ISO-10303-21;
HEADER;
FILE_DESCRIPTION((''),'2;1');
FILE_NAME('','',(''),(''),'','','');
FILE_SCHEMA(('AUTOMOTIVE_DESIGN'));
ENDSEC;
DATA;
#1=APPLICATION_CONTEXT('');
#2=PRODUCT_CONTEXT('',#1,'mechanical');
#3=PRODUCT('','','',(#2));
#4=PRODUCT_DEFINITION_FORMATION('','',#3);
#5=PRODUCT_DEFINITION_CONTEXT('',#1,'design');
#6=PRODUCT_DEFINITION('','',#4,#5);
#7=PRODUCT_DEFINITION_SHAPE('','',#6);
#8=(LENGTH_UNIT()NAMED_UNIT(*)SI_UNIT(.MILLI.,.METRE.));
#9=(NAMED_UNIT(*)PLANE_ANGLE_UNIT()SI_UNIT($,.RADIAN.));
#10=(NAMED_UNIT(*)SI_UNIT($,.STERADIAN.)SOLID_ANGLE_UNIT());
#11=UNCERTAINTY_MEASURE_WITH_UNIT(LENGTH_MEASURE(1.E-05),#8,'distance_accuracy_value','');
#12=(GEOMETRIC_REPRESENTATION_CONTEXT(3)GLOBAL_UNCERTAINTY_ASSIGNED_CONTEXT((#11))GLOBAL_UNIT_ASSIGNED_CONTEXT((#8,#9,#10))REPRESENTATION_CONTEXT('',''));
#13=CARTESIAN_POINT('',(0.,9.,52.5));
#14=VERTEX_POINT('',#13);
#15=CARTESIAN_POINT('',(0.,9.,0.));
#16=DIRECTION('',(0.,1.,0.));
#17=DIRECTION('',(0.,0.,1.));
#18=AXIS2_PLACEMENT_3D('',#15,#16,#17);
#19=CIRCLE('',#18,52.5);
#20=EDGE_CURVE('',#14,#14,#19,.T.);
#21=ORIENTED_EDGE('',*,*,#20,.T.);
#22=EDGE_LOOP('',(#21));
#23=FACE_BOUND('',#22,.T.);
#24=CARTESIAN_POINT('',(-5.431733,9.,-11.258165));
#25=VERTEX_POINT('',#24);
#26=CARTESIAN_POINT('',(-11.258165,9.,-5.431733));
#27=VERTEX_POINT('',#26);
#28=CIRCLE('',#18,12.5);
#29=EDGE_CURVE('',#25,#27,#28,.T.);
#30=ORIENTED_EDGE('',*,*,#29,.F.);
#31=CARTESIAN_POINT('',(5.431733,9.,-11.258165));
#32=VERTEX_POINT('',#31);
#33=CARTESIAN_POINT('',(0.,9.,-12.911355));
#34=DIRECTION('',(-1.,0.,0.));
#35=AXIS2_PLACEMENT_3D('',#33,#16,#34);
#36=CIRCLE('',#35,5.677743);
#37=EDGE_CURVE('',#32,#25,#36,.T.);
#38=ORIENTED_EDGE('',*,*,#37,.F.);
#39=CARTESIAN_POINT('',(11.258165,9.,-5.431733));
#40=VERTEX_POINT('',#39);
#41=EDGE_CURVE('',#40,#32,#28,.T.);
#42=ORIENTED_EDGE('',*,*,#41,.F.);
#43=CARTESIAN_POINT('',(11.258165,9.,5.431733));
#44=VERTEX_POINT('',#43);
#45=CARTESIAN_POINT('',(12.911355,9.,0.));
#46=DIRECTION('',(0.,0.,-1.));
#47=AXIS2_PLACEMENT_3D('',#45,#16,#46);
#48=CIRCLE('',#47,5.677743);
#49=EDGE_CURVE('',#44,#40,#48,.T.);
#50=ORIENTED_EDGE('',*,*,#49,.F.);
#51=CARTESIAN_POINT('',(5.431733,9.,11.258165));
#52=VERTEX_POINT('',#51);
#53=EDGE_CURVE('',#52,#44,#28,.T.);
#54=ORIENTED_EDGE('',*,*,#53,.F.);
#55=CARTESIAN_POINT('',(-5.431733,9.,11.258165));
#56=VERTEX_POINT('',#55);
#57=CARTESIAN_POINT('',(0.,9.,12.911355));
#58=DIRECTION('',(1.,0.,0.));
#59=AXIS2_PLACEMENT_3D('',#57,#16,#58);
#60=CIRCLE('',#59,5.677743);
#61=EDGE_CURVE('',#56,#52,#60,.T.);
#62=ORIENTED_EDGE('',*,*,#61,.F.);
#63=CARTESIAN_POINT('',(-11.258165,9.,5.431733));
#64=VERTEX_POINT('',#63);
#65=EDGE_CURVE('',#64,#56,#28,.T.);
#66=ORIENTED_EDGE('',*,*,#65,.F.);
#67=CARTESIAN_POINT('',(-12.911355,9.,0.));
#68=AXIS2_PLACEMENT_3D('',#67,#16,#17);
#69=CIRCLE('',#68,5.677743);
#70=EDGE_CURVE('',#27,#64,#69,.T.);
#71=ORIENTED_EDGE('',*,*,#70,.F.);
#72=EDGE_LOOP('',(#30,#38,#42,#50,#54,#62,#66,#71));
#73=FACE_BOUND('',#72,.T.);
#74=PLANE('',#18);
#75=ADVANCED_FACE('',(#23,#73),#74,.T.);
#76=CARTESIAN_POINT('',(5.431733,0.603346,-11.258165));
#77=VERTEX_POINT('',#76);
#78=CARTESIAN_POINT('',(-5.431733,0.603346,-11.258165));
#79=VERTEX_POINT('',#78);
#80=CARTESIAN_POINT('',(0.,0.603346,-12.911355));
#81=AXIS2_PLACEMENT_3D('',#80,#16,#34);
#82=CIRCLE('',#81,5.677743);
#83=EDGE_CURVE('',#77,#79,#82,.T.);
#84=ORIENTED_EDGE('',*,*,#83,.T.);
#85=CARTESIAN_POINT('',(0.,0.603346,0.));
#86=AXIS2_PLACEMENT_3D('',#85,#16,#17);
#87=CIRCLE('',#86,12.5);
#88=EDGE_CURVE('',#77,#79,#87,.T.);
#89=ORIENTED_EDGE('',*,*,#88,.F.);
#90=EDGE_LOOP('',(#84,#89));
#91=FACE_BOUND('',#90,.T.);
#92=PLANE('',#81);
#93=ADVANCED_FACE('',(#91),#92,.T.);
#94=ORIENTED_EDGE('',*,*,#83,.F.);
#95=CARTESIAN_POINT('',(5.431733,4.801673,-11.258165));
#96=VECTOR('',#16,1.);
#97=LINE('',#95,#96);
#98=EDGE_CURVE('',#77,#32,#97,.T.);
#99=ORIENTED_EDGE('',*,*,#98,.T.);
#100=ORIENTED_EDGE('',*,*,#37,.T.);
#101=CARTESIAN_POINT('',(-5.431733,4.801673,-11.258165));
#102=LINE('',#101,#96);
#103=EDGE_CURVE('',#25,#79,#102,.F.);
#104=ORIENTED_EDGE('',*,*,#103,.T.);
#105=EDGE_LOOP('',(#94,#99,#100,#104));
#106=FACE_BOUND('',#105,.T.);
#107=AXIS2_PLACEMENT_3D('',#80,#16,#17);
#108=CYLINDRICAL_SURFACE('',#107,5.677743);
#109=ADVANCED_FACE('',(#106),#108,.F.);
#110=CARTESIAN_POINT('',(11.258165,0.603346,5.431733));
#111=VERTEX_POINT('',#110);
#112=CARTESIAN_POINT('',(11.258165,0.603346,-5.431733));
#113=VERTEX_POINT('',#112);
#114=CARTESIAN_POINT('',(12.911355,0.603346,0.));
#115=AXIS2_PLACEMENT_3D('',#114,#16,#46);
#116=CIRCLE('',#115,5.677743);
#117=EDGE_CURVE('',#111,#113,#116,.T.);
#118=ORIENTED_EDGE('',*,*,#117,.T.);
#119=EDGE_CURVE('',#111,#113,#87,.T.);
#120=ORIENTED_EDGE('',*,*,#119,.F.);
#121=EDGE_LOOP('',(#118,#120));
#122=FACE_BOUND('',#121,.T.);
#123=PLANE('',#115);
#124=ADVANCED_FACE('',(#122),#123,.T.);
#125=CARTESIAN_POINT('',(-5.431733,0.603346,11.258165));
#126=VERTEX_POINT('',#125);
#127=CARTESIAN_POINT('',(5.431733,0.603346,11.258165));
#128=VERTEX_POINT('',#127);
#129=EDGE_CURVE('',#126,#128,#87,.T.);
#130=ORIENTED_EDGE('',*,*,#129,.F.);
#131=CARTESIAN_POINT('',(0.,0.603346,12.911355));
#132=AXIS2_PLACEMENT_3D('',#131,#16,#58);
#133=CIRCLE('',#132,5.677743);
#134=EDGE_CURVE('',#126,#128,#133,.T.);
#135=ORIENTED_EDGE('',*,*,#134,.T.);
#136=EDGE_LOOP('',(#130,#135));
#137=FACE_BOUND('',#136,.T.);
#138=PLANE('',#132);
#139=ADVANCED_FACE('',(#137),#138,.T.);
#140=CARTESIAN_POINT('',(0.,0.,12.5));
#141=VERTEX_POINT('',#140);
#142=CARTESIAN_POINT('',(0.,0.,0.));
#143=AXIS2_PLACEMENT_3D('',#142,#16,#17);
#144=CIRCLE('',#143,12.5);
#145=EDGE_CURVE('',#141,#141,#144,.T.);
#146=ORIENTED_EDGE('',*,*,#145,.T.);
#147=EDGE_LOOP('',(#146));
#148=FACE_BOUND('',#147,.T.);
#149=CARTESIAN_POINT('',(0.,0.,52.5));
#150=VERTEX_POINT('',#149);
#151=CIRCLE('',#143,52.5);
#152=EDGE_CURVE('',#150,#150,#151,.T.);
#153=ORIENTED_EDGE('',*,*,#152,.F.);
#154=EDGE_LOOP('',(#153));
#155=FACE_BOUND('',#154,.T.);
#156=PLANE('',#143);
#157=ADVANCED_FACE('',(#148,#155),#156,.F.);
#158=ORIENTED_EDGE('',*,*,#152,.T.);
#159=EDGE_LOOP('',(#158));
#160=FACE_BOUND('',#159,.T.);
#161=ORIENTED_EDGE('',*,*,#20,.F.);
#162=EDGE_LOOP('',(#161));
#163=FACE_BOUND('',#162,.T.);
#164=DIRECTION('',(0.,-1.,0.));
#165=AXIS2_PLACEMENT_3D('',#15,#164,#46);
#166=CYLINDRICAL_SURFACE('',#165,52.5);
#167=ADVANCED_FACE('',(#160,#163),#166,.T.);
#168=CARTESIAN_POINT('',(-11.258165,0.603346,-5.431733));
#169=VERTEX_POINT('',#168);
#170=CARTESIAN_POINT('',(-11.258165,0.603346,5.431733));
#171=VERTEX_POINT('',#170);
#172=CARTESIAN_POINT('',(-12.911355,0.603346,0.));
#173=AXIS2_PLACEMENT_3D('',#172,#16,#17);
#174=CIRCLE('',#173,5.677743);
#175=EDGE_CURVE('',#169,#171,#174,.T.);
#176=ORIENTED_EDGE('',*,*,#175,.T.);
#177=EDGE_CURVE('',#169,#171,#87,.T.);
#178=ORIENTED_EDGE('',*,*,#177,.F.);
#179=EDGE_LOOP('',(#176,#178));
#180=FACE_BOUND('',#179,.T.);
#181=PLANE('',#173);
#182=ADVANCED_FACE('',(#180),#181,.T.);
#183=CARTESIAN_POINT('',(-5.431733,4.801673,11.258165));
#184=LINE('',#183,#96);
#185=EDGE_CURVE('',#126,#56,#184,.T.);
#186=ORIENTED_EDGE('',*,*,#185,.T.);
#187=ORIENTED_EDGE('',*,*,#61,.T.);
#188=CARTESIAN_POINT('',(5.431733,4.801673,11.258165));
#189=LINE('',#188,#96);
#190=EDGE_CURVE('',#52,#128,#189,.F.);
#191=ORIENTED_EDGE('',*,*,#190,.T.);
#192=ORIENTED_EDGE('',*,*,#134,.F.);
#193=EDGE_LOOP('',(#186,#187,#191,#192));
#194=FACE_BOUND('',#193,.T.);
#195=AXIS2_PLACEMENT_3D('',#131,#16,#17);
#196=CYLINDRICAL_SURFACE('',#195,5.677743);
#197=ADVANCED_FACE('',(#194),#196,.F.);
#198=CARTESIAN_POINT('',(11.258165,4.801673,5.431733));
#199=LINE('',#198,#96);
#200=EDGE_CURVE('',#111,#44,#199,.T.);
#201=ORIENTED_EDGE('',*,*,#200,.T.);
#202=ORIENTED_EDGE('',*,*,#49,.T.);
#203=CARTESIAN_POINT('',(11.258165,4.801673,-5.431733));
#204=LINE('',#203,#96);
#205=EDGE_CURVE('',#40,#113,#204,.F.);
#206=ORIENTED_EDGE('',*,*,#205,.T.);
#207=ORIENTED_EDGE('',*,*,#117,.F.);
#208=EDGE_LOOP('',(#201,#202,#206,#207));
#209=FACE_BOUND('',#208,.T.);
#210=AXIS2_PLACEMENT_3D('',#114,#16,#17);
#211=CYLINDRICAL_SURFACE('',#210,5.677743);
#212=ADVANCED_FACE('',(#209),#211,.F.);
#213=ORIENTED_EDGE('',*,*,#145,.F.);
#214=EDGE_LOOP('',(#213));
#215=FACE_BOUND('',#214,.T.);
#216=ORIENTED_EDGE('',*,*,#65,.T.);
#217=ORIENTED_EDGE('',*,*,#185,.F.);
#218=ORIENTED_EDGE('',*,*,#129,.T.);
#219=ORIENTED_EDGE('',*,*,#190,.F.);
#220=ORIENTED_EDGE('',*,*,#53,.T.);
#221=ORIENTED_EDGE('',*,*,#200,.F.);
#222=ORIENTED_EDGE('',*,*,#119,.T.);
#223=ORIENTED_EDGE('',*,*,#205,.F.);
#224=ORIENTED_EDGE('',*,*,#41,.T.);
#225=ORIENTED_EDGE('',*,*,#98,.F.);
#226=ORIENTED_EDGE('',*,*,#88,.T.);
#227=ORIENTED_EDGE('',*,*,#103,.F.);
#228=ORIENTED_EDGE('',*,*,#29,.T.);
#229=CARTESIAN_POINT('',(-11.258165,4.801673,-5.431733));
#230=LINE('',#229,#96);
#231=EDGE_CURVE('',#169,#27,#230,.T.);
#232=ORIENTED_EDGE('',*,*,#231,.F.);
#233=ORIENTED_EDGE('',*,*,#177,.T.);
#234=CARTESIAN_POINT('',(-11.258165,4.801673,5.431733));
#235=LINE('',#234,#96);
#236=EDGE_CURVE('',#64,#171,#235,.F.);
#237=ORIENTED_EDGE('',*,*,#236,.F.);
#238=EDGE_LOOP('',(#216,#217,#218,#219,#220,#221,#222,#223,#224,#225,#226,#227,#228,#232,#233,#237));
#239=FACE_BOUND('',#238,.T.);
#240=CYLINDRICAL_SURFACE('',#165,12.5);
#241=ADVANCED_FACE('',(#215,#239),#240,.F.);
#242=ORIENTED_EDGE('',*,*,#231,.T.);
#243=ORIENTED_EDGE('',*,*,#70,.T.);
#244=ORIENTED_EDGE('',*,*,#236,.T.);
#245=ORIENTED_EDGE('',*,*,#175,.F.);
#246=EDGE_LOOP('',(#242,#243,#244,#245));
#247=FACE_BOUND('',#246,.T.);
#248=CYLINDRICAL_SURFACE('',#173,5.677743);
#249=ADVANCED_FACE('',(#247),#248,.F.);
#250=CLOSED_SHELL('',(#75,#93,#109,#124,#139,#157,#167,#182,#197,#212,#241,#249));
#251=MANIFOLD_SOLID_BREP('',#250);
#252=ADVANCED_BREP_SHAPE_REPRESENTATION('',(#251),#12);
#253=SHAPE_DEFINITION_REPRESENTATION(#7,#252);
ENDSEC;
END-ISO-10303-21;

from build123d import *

# Parameters (mm, degrees)
SKETCH1_R           = 52.5
BOSS_EXTRUDE1_DEPTH = 9
SKETCH2_R           = 12.5
CUT_EXTRUDE1_DEPTH  = 75.789705174
SKETCH3_R           = 5.677743223
CUT_EXTRUDE2_DEPTH  = 8.396653789
CIRPATTERN1_COUNT   = 4


with BuildPart() as part:
    # Sketch1 → Boss-Extrude1 (new body)
    with BuildSketch(Plane(origin=(0, 0, 0), x_dir=(1, 0, 0), z_dir=(0, 1, 0))):
        Circle(SKETCH1_R)
    extrude(amount=BOSS_EXTRUDE1_DEPTH)

    # Sketch2 → Cut-Extrude1 (cut, through all)
    with BuildSketch(Plane(origin=(0, 0, 0), x_dir=(1, 0, 0), z_dir=(0, 1, 0))):
        Circle(SKETCH2_R)
    extrude(amount=CUT_EXTRUDE1_DEPTH, mode=Mode.SUBTRACT)

    # Sketch3 → Cut-Extrude2 (cut)
    with BuildSketch(Plane(origin=(0, 9, 0), x_dir=(1, 0, 0), z_dir=(0, 1, 0))):
        with Locations((-12.911355312, 0)):
            Circle(SKETCH3_R)
    cut_extrude2 = extrude(amount=-CUT_EXTRUDE2_DEPTH, mode=Mode.SUBTRACT)

    # CirPattern1: Cut-Extrude2 ×4 about axis
    cirpattern1_axis = Axis((0, 0, 0), (0, 1, 0))
    for i in range(1, CIRPATTERN1_COUNT):
        add(cut_extrude2.rotate(cirpattern1_axis, i * 360 / CIRPATTERN1_COUNT), mode=Mode.SUBTRACT)


solid = part.part
